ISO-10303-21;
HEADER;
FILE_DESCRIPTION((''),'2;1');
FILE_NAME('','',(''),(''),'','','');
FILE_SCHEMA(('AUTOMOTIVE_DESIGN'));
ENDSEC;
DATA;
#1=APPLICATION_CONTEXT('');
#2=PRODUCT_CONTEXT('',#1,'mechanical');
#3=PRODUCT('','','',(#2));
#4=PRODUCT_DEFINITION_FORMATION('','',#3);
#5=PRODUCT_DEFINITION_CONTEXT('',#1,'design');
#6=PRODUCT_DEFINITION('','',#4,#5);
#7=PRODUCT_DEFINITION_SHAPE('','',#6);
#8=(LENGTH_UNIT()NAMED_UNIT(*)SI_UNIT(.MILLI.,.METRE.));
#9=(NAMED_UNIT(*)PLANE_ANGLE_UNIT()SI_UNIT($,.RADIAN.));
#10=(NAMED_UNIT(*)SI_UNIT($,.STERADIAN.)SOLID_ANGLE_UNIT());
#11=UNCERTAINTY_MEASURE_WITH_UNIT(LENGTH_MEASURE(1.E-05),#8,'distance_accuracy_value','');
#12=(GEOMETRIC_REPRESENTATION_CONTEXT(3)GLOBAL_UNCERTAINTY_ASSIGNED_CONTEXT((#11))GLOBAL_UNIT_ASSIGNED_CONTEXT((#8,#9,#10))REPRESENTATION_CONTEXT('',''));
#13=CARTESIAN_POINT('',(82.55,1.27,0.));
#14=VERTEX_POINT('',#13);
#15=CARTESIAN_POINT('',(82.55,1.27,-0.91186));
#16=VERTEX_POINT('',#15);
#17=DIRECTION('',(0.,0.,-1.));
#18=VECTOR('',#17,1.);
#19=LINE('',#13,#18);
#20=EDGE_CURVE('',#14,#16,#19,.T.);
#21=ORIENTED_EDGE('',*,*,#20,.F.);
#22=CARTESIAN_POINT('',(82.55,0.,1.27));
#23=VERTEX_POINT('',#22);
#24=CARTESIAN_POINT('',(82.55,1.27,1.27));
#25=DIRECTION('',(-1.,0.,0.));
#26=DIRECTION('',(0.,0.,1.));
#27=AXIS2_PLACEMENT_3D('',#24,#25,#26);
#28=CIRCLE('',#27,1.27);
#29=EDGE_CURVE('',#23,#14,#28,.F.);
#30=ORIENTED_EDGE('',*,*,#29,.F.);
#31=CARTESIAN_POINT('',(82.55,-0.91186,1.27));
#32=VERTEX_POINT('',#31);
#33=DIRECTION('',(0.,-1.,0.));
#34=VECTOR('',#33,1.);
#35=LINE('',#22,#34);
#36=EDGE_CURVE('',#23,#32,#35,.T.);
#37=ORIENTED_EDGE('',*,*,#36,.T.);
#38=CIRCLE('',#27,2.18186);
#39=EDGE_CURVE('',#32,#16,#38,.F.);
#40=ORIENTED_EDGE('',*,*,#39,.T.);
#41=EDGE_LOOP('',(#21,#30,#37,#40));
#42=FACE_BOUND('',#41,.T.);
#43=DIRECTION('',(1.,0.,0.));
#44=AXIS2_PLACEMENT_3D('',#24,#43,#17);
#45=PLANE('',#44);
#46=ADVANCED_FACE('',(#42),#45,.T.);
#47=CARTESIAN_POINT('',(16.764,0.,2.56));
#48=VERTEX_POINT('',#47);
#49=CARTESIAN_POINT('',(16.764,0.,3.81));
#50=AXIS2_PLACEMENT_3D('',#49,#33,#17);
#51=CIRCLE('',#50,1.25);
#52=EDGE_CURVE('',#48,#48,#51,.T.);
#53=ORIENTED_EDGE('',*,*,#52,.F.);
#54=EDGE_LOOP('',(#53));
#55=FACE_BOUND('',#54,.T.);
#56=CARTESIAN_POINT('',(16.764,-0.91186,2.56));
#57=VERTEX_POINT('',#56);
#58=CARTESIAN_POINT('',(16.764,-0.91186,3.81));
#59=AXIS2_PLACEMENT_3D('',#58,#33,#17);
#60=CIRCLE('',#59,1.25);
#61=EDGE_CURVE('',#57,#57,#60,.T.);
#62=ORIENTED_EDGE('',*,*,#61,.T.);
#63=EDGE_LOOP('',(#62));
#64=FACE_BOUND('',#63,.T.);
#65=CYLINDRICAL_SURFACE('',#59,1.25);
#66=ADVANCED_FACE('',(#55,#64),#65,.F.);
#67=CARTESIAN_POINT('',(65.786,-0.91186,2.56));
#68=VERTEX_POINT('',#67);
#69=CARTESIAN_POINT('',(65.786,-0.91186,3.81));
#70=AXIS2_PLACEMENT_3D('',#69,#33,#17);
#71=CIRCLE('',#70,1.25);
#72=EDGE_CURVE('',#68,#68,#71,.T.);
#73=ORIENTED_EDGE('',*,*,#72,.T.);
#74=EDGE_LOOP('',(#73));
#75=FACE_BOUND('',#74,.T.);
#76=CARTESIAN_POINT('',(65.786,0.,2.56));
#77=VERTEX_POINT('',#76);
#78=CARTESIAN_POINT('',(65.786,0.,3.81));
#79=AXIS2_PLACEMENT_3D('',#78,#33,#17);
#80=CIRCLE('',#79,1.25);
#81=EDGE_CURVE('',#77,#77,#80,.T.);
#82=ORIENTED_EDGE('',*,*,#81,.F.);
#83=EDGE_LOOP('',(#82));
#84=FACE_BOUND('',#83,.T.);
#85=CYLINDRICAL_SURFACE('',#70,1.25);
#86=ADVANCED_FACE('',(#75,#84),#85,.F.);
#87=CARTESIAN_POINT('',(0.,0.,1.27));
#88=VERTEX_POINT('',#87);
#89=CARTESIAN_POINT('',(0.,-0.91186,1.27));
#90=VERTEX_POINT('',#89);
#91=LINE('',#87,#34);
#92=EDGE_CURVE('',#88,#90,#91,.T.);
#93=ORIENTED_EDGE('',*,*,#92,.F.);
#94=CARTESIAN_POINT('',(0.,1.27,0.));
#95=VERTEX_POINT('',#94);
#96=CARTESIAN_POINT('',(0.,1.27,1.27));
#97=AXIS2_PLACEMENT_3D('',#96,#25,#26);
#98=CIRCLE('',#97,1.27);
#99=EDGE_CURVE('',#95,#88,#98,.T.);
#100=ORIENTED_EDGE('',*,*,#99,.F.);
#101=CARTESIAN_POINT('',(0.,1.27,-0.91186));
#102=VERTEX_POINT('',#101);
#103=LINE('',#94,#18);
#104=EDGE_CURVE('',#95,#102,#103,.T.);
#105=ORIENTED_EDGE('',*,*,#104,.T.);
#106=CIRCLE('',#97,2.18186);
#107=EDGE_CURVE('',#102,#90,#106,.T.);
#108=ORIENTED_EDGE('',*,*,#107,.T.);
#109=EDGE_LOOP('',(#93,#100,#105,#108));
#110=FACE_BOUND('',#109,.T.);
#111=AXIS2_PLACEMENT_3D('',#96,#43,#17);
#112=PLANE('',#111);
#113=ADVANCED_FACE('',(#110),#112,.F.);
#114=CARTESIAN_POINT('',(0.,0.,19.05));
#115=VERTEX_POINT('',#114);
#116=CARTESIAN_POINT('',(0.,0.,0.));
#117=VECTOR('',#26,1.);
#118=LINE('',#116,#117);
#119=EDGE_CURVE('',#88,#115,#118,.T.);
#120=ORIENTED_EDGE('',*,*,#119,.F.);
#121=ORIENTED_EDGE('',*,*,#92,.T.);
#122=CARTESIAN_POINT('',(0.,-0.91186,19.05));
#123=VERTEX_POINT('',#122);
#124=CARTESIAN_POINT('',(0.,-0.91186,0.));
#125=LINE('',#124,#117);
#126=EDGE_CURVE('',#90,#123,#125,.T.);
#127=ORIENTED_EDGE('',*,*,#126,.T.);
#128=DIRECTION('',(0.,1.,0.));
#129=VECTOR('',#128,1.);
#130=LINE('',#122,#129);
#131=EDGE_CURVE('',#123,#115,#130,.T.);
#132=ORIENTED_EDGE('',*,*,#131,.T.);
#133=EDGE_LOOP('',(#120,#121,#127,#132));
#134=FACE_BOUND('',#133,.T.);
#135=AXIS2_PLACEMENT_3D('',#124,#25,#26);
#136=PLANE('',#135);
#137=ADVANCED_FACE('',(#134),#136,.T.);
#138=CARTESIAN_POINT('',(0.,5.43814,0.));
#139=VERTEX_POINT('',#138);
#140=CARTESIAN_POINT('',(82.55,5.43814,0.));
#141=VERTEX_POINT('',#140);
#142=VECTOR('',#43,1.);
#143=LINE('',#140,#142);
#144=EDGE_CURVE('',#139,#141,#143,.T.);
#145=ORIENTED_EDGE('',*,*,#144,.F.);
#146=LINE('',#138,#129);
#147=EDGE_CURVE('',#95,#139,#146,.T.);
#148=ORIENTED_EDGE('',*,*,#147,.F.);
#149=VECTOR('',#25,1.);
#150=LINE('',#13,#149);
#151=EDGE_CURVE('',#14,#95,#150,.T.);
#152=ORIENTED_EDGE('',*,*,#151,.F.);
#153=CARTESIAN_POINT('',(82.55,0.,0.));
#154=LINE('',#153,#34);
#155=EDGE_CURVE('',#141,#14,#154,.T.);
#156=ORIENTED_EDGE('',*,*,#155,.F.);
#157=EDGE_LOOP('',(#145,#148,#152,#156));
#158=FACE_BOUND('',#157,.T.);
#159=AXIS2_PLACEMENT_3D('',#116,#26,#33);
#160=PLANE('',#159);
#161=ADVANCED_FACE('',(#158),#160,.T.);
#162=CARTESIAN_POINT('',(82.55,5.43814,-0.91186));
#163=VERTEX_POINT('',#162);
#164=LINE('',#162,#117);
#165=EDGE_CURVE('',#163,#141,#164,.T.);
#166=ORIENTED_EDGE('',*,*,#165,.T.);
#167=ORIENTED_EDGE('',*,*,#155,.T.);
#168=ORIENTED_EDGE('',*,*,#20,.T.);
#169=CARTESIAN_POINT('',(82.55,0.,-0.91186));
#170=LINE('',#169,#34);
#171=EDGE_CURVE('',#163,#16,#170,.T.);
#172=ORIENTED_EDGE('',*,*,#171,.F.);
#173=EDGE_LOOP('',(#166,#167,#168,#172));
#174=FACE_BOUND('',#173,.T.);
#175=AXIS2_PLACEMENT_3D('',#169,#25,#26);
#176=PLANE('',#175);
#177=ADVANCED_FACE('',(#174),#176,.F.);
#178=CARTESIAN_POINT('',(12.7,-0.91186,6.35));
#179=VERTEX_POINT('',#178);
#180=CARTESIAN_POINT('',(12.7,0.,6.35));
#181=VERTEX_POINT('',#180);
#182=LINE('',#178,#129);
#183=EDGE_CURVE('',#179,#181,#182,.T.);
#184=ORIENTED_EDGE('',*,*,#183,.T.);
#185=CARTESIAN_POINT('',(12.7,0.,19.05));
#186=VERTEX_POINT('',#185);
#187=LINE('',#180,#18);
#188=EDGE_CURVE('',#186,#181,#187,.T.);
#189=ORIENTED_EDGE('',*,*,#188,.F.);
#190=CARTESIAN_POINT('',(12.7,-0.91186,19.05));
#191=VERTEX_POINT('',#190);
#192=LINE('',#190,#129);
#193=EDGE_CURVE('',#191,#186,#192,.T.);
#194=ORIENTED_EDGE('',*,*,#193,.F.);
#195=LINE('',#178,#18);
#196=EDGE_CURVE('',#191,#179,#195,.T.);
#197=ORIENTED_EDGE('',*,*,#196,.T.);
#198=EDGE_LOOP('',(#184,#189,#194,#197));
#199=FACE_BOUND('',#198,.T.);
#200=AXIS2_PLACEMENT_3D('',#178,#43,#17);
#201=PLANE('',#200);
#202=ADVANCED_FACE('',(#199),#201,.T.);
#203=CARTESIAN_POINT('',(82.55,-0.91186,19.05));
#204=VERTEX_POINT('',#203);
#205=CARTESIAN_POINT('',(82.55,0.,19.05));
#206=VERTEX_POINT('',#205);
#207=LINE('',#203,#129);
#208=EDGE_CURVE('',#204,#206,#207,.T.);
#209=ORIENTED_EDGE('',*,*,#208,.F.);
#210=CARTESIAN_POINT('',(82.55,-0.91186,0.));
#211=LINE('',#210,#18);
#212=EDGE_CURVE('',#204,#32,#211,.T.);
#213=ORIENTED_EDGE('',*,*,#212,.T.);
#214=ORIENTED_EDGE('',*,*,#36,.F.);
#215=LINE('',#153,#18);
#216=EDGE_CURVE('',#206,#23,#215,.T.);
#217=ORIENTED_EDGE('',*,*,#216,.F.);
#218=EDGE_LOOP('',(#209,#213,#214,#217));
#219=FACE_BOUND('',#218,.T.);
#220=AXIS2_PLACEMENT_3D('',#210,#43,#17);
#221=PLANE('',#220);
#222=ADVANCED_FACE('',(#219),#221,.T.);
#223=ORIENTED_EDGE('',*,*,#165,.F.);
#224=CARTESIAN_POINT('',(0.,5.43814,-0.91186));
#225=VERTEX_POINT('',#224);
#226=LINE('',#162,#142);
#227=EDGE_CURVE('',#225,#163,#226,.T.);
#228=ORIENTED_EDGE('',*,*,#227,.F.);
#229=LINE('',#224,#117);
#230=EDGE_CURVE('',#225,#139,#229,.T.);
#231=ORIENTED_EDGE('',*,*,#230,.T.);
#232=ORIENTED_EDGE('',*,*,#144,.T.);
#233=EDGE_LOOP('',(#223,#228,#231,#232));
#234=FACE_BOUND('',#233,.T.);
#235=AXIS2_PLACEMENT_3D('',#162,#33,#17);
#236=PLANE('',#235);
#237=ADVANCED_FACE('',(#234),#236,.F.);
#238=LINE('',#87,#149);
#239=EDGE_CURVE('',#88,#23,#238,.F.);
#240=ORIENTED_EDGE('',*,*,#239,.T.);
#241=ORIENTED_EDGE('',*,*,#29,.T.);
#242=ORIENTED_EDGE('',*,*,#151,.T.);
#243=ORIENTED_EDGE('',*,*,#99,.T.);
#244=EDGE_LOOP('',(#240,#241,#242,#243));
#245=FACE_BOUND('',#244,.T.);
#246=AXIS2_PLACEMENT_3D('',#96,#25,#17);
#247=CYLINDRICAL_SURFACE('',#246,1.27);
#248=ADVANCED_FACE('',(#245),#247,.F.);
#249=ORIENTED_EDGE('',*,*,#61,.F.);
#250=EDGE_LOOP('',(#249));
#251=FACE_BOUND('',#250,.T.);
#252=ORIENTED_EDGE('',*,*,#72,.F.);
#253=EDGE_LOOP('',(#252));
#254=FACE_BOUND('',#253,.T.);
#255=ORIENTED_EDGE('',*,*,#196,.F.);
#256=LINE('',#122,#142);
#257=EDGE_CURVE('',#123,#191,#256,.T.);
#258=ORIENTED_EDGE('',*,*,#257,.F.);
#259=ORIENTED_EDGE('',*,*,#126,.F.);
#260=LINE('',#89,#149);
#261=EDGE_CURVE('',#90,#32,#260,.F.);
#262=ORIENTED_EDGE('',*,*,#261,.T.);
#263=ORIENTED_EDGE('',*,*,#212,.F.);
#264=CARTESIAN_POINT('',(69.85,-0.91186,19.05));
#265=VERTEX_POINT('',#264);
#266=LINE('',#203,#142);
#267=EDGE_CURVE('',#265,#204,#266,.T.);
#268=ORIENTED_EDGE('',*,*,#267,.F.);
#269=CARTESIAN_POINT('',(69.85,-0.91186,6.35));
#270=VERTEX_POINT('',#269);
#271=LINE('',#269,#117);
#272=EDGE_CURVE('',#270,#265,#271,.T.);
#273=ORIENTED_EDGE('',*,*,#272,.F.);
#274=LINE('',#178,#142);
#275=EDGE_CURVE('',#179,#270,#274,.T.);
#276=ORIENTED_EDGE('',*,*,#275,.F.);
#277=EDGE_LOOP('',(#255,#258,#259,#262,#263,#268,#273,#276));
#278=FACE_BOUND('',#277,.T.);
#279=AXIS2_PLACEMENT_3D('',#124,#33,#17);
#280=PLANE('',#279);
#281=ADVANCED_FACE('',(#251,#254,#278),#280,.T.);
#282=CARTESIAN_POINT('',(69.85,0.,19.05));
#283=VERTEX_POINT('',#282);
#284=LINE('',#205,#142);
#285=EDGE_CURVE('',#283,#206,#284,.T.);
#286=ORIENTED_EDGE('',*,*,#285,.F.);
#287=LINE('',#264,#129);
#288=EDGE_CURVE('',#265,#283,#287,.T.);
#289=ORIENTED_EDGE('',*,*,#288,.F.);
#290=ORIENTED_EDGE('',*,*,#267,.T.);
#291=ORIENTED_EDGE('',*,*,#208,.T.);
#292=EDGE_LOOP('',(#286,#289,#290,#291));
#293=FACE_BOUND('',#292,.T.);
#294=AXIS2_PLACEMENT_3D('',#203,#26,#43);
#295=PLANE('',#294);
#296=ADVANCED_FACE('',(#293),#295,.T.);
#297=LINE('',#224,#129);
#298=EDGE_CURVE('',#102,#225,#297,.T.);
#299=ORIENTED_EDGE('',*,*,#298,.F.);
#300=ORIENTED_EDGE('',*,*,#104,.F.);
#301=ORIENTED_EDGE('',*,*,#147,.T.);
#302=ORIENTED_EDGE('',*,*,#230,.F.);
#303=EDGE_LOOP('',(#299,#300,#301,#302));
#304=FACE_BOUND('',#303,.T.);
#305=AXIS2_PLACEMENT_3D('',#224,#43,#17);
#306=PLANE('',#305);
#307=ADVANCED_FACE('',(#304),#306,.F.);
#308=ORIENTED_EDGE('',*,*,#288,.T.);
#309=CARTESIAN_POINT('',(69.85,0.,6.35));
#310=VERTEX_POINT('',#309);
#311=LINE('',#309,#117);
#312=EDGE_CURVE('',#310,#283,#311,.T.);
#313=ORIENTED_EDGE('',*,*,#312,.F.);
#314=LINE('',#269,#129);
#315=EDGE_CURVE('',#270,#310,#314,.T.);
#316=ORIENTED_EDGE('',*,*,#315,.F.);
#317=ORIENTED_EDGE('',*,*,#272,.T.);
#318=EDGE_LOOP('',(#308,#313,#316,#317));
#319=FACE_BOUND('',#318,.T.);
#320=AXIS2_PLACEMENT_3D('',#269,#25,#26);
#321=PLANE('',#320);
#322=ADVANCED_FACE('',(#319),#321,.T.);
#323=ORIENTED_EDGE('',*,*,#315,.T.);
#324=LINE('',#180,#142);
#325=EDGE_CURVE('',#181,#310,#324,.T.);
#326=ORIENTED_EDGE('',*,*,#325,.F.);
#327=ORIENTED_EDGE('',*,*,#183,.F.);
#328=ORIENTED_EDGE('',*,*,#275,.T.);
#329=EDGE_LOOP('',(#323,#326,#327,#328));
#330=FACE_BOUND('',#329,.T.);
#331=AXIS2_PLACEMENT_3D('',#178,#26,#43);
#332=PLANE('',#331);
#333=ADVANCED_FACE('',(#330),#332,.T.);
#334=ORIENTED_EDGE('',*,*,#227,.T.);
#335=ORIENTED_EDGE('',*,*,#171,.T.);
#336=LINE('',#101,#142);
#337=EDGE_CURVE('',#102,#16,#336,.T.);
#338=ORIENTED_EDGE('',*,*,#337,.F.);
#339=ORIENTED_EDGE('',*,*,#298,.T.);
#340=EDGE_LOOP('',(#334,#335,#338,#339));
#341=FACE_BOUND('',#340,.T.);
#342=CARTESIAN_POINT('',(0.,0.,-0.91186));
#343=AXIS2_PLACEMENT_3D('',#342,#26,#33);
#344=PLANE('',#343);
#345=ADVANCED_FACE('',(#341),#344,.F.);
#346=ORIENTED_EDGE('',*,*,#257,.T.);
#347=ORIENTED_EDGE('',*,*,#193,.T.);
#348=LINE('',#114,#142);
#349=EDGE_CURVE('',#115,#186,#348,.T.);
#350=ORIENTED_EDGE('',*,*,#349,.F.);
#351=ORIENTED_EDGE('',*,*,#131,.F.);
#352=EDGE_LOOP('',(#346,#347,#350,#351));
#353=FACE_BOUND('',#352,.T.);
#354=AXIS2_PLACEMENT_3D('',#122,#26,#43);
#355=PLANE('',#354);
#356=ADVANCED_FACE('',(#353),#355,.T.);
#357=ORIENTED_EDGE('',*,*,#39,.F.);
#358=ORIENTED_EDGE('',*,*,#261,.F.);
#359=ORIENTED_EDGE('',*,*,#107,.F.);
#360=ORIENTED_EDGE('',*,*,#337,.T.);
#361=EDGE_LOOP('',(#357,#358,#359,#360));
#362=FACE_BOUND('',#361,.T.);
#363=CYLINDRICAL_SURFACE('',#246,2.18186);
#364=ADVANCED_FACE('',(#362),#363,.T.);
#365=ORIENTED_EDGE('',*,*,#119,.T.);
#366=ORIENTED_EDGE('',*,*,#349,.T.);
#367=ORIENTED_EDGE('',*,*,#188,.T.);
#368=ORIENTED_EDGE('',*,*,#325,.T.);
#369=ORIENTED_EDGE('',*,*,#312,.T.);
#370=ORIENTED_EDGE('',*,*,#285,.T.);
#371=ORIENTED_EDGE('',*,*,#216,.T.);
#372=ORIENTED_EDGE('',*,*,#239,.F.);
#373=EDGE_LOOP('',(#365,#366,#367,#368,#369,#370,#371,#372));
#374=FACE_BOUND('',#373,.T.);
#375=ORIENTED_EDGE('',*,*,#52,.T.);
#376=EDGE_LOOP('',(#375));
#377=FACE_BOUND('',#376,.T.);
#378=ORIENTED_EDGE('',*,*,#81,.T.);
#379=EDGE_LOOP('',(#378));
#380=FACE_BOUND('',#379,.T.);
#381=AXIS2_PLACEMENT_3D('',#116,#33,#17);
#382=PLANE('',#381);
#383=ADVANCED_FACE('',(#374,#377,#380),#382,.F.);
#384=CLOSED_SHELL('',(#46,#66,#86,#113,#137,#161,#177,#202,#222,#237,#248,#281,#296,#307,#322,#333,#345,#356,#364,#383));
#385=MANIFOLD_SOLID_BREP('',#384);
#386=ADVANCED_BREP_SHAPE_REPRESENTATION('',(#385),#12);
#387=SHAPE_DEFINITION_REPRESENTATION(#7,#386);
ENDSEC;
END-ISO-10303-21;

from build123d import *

# Parameters (mm, degrees)
BASE_FLANGE1_DEPTH           = 0.91186
F_2_5MM_DOWEL_HOLE1_D        = 2.5
EDGE_FLANGE1_STRIP_W         = 6.18744
EDGE_FLANGE1_STRIP_H         = 0.91186
EDGE_FLANGE1_STRIP_CUT_DEPTH = 82.55
EDGE_FLANGE1_DEPTH           = 82.55


# Sheet-metal steps are written as plain solids
with BuildPart() as part:
    # Sketch1 → Base-Flange1 (new body)
    with BuildSketch(Plane(origin=(0, 0, 0), x_dir=(1, 0, 0), z_dir=(0, 1, 0))):
        Polygon((0, 0), (0, -19.05), (12.7, -19.05), (12.7, -6.35), (69.85, -6.35), (69.85, -19.05), (82.55, -19.05), (82.55, 0), align=None)
    extrude(amount=-BASE_FLANGE1_DEPTH)

    # Ø2.5mm Dowel Hole1 (through all)
    with Locations(Plane(origin=(0, -0.91186, 0), x_dir=(-1, 0, 0), z_dir=(0, -1, 0))):
        with Locations((-65.786, -3.81), (-16.764, -3.81)):
            Hole(F_2_5MM_DOWEL_HOLE1_D / 2)

    # Edge-Flange1 strip (across the edge) → Edge-Flange1 strip cut (cut)
    with BuildSketch(Plane.ZY.offset(-82.55)):
        with Locations((-1.82372, -0.45593)):
            Rectangle(EDGE_FLANGE1_STRIP_W, EDGE_FLANGE1_STRIP_H)
    extrude(amount=EDGE_FLANGE1_STRIP_CUT_DEPTH, mode=Mode.SUBTRACT)

    # Edge-Flange1 section (across the edge) → Edge-Flange1 (add)
    with BuildSketch(Plane.ZY.offset(-82.55)):
        with BuildLine():
            Line((-0.91186, 1.27), (-0.91186, 5.43814))
            Line((-0.91186, 5.43814), (0, 5.43814))
            Line((0, 5.43814), (0, 1.27))
            ThreePointArc((0, 1.27), (0.371974388, 0.371974388), (1.27, 0))
            Line((1.27, 0), (1.27, -0.91186))
            ThreePointArc((1.27, -0.91186), (-0.272808002, -0.272808002), (-0.91186, 1.27))
        make_face()
    extrude(amount=EDGE_FLANGE1_DEPTH)


solid = part.part
